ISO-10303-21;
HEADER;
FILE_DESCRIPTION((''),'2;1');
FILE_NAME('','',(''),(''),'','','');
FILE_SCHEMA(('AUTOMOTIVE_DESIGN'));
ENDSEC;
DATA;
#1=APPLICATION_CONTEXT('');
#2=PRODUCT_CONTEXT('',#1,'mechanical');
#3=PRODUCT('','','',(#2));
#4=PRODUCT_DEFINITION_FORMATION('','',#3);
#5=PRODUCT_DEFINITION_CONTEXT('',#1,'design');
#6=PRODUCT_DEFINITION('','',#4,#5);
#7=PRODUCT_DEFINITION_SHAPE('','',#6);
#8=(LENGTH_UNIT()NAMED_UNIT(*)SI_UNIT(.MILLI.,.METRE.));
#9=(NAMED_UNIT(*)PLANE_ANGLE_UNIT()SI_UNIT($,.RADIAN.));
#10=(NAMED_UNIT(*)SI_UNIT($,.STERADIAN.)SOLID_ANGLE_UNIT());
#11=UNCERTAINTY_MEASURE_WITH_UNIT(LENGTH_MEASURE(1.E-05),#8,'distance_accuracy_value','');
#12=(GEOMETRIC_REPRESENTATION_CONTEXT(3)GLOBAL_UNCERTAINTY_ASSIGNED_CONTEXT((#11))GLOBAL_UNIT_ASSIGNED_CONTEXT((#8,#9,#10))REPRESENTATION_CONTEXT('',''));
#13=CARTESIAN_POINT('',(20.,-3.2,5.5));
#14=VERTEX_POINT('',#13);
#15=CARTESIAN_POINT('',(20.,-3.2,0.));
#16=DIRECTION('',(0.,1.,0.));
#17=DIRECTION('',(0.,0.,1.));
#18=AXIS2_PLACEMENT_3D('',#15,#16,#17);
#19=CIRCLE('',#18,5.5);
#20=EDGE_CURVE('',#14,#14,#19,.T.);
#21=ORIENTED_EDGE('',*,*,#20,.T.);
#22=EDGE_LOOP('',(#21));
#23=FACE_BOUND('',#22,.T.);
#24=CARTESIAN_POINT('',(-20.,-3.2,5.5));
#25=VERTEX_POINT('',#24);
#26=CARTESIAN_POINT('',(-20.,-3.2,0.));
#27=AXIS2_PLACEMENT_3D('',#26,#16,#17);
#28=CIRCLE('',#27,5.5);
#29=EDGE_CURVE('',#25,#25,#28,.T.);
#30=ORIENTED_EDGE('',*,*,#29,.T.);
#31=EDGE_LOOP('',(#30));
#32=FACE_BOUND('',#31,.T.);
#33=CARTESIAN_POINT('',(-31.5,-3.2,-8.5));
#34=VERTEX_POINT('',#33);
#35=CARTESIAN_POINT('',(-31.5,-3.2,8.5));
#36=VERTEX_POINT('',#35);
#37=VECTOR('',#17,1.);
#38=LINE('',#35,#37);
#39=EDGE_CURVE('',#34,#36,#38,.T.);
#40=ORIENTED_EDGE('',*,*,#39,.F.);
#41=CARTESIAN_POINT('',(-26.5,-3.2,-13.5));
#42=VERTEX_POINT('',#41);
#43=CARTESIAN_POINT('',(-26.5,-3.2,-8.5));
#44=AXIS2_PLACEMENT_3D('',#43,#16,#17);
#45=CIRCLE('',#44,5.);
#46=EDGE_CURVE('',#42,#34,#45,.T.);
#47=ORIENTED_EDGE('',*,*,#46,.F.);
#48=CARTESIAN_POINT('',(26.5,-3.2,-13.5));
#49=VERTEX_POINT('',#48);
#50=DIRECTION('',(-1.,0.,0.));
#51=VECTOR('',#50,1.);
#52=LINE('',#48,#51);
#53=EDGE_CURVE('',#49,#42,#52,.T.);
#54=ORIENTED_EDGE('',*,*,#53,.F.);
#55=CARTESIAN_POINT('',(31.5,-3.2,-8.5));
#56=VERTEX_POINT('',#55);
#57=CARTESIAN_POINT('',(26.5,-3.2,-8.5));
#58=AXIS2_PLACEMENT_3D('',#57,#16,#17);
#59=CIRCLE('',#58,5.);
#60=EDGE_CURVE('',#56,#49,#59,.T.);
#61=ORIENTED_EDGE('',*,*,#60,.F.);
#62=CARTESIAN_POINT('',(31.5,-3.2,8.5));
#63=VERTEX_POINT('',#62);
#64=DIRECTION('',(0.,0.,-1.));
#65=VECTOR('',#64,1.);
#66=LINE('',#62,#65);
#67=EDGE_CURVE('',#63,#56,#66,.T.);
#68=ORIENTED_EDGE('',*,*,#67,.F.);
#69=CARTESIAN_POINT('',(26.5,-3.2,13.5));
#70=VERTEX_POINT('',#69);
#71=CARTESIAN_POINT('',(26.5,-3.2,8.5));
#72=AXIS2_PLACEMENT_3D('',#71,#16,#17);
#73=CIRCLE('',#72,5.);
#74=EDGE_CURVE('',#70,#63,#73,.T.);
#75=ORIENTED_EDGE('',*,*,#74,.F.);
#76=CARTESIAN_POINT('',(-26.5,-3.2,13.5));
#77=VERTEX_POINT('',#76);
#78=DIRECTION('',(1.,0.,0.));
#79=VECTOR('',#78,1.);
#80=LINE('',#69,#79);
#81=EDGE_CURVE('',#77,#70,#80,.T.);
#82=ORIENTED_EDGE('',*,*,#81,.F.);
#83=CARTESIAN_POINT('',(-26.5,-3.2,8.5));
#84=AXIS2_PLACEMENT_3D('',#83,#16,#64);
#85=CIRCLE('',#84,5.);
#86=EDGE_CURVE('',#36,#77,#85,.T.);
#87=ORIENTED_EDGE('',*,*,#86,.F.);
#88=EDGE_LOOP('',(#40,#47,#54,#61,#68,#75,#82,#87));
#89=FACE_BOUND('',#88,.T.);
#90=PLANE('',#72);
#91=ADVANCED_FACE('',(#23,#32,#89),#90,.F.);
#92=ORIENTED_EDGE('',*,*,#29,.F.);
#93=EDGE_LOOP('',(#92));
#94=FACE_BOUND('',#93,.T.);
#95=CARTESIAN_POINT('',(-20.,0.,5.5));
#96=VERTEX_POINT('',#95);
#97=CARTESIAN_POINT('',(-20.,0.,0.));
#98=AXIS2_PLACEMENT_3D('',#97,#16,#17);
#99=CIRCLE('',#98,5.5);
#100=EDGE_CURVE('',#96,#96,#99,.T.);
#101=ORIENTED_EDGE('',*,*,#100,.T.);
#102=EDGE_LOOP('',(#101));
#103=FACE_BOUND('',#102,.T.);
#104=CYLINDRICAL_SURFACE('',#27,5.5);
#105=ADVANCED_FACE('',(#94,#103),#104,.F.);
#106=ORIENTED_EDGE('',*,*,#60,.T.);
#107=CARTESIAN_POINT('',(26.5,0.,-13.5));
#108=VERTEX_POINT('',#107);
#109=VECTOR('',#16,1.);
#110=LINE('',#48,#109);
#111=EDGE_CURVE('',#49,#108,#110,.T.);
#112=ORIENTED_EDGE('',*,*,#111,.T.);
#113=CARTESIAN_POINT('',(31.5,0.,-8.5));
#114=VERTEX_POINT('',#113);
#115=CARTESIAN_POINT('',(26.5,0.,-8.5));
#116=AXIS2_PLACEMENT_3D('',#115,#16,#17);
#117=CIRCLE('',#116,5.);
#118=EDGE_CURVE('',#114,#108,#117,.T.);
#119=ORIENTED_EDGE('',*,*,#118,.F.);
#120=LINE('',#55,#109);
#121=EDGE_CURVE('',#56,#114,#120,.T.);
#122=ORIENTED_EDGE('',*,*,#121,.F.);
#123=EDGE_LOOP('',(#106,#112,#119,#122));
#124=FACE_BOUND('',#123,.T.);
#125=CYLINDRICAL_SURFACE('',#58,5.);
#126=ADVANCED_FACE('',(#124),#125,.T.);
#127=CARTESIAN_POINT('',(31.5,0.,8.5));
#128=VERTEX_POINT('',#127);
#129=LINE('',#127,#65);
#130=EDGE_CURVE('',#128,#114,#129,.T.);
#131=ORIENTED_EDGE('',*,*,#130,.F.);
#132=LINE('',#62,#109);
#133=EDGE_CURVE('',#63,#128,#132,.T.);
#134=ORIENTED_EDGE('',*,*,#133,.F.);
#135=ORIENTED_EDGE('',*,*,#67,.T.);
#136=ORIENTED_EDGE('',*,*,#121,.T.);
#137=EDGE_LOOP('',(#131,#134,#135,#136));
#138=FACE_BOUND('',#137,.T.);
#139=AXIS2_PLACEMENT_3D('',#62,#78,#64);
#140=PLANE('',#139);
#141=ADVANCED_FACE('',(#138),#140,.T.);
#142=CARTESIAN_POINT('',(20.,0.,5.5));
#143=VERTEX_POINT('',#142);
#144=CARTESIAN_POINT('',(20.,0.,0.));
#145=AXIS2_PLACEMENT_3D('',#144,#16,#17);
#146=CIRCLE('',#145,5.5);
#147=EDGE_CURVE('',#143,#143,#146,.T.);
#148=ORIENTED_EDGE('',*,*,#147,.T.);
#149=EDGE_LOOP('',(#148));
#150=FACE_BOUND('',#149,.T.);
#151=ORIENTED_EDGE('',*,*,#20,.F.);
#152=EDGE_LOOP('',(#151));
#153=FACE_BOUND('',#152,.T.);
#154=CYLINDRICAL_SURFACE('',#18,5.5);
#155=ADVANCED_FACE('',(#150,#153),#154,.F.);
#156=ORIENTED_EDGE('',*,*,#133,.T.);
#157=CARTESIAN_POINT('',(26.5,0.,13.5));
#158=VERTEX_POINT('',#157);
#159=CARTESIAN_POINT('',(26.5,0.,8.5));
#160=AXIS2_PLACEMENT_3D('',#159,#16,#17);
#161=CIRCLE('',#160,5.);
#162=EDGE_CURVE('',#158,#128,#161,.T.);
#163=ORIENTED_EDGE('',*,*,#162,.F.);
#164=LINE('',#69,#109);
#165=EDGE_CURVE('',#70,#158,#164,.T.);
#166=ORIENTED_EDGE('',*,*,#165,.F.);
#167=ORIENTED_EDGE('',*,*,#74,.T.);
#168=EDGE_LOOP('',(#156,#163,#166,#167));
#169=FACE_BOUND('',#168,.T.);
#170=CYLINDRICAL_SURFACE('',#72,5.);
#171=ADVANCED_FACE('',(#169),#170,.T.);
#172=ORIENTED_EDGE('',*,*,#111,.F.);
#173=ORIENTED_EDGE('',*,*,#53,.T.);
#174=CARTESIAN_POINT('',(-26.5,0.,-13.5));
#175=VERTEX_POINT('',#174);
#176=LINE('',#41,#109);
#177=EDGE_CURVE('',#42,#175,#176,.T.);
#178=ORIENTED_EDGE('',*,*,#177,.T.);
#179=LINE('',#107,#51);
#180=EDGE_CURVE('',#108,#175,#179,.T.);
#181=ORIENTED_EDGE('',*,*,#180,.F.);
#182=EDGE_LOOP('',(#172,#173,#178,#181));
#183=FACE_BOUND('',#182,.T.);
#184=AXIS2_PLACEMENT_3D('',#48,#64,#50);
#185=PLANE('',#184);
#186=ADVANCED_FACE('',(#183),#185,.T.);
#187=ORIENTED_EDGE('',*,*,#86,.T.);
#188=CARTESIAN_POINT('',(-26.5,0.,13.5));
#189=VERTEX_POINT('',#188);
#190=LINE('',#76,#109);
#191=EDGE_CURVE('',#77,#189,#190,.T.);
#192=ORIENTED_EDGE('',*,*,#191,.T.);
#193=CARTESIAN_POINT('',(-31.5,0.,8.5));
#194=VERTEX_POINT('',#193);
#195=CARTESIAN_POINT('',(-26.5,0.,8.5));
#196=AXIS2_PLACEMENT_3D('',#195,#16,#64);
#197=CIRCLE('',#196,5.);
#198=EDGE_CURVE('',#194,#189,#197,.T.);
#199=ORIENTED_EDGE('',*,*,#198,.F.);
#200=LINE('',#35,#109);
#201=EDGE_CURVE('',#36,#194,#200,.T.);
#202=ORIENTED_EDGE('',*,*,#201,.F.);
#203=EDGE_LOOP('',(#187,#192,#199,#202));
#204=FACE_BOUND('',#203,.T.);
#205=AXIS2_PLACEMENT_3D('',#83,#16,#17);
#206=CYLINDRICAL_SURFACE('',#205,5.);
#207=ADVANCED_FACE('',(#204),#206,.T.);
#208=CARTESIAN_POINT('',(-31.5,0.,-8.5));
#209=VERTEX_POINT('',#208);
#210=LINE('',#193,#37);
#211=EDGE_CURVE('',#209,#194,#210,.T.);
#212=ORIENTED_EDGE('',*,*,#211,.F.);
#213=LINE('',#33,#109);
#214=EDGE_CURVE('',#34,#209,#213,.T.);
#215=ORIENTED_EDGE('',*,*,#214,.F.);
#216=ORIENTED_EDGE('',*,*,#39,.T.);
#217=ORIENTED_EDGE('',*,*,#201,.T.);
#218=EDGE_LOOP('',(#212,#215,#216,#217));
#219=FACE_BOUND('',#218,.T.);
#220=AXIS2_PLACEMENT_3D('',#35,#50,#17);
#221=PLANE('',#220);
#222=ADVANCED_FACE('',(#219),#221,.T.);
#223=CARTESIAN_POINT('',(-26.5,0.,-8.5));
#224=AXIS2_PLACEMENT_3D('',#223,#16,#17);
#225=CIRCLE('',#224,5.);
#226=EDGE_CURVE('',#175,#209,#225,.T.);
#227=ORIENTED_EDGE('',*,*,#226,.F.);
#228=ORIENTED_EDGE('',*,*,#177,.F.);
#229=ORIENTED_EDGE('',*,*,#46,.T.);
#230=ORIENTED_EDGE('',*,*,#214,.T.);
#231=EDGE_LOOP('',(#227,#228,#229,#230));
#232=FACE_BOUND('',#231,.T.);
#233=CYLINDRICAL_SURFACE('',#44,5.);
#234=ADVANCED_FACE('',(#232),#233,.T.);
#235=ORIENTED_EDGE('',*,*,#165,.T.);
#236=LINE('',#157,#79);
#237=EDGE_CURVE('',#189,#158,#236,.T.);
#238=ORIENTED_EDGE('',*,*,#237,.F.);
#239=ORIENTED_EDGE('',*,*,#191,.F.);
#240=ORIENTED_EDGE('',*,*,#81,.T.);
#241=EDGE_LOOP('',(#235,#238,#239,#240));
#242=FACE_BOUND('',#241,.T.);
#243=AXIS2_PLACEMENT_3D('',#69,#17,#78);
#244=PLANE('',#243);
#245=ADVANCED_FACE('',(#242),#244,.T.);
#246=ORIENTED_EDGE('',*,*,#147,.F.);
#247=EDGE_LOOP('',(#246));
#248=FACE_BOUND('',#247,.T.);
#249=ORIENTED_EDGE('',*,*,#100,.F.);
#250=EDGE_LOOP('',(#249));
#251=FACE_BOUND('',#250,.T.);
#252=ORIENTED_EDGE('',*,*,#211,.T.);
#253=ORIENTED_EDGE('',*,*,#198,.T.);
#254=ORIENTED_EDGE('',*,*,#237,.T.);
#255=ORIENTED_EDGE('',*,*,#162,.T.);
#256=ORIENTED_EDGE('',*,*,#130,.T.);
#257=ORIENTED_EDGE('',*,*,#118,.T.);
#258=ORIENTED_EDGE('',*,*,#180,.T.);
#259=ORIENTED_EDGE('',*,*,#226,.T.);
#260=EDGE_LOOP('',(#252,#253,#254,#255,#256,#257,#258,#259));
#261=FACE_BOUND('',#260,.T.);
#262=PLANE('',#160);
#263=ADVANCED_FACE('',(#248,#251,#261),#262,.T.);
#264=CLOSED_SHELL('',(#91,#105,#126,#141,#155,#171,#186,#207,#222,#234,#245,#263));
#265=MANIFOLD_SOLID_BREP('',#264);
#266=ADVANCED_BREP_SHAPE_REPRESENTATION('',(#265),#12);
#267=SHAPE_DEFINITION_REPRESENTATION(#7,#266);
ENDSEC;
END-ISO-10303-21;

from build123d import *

# Parameters (mm, degrees)
SKETCH1_R          = 5.5
BASE_FLANGE1_DEPTH = 3.2


# Sheet-metal steps are written as plain solids
with BuildPart() as part:
    # Sketch1 → Base-Flange1 (new body)
    with BuildSketch(Plane(origin=(0, 0, 0), x_dir=(1, 0, 0), z_dir=(0, 1, 0))):
        with BuildLine():
            Line((26.5, -13.5), (-26.5, -13.5))
            ThreePointArc((-26.5, -13.5), (-30.035533906, -12.035533906), (-31.5, -8.5))
            Line((-31.5, -8.5), (-31.5, 8.5))
            ThreePointArc((-31.5, 8.5), (-30.035533906, 12.035533906), (-26.5, 13.5))
            Line((-26.5, 13.5), (26.5, 13.5))
            ThreePointArc((26.5, 13.5), (30.035533906, 12.035533906), (31.5, 8.5))
            Line((31.5, 8.5), (31.5, -8.5))
            ThreePointArc((31.5, -8.5), (30.035533906, -12.035533906), (26.5, -13.5))
        make_face()
        with Locations(Location((-20, 0, 0), (0, 0, 270))):
            Circle(SKETCH1_R, mode=Mode.SUBTRACT)
        with Locations(Location((20, 0, 0), (0, 0, 270))):
            Circle(SKETCH1_R, mode=Mode.SUBTRACT)
    extrude(amount=-BASE_FLANGE1_DEPTH)


solid = part.part
